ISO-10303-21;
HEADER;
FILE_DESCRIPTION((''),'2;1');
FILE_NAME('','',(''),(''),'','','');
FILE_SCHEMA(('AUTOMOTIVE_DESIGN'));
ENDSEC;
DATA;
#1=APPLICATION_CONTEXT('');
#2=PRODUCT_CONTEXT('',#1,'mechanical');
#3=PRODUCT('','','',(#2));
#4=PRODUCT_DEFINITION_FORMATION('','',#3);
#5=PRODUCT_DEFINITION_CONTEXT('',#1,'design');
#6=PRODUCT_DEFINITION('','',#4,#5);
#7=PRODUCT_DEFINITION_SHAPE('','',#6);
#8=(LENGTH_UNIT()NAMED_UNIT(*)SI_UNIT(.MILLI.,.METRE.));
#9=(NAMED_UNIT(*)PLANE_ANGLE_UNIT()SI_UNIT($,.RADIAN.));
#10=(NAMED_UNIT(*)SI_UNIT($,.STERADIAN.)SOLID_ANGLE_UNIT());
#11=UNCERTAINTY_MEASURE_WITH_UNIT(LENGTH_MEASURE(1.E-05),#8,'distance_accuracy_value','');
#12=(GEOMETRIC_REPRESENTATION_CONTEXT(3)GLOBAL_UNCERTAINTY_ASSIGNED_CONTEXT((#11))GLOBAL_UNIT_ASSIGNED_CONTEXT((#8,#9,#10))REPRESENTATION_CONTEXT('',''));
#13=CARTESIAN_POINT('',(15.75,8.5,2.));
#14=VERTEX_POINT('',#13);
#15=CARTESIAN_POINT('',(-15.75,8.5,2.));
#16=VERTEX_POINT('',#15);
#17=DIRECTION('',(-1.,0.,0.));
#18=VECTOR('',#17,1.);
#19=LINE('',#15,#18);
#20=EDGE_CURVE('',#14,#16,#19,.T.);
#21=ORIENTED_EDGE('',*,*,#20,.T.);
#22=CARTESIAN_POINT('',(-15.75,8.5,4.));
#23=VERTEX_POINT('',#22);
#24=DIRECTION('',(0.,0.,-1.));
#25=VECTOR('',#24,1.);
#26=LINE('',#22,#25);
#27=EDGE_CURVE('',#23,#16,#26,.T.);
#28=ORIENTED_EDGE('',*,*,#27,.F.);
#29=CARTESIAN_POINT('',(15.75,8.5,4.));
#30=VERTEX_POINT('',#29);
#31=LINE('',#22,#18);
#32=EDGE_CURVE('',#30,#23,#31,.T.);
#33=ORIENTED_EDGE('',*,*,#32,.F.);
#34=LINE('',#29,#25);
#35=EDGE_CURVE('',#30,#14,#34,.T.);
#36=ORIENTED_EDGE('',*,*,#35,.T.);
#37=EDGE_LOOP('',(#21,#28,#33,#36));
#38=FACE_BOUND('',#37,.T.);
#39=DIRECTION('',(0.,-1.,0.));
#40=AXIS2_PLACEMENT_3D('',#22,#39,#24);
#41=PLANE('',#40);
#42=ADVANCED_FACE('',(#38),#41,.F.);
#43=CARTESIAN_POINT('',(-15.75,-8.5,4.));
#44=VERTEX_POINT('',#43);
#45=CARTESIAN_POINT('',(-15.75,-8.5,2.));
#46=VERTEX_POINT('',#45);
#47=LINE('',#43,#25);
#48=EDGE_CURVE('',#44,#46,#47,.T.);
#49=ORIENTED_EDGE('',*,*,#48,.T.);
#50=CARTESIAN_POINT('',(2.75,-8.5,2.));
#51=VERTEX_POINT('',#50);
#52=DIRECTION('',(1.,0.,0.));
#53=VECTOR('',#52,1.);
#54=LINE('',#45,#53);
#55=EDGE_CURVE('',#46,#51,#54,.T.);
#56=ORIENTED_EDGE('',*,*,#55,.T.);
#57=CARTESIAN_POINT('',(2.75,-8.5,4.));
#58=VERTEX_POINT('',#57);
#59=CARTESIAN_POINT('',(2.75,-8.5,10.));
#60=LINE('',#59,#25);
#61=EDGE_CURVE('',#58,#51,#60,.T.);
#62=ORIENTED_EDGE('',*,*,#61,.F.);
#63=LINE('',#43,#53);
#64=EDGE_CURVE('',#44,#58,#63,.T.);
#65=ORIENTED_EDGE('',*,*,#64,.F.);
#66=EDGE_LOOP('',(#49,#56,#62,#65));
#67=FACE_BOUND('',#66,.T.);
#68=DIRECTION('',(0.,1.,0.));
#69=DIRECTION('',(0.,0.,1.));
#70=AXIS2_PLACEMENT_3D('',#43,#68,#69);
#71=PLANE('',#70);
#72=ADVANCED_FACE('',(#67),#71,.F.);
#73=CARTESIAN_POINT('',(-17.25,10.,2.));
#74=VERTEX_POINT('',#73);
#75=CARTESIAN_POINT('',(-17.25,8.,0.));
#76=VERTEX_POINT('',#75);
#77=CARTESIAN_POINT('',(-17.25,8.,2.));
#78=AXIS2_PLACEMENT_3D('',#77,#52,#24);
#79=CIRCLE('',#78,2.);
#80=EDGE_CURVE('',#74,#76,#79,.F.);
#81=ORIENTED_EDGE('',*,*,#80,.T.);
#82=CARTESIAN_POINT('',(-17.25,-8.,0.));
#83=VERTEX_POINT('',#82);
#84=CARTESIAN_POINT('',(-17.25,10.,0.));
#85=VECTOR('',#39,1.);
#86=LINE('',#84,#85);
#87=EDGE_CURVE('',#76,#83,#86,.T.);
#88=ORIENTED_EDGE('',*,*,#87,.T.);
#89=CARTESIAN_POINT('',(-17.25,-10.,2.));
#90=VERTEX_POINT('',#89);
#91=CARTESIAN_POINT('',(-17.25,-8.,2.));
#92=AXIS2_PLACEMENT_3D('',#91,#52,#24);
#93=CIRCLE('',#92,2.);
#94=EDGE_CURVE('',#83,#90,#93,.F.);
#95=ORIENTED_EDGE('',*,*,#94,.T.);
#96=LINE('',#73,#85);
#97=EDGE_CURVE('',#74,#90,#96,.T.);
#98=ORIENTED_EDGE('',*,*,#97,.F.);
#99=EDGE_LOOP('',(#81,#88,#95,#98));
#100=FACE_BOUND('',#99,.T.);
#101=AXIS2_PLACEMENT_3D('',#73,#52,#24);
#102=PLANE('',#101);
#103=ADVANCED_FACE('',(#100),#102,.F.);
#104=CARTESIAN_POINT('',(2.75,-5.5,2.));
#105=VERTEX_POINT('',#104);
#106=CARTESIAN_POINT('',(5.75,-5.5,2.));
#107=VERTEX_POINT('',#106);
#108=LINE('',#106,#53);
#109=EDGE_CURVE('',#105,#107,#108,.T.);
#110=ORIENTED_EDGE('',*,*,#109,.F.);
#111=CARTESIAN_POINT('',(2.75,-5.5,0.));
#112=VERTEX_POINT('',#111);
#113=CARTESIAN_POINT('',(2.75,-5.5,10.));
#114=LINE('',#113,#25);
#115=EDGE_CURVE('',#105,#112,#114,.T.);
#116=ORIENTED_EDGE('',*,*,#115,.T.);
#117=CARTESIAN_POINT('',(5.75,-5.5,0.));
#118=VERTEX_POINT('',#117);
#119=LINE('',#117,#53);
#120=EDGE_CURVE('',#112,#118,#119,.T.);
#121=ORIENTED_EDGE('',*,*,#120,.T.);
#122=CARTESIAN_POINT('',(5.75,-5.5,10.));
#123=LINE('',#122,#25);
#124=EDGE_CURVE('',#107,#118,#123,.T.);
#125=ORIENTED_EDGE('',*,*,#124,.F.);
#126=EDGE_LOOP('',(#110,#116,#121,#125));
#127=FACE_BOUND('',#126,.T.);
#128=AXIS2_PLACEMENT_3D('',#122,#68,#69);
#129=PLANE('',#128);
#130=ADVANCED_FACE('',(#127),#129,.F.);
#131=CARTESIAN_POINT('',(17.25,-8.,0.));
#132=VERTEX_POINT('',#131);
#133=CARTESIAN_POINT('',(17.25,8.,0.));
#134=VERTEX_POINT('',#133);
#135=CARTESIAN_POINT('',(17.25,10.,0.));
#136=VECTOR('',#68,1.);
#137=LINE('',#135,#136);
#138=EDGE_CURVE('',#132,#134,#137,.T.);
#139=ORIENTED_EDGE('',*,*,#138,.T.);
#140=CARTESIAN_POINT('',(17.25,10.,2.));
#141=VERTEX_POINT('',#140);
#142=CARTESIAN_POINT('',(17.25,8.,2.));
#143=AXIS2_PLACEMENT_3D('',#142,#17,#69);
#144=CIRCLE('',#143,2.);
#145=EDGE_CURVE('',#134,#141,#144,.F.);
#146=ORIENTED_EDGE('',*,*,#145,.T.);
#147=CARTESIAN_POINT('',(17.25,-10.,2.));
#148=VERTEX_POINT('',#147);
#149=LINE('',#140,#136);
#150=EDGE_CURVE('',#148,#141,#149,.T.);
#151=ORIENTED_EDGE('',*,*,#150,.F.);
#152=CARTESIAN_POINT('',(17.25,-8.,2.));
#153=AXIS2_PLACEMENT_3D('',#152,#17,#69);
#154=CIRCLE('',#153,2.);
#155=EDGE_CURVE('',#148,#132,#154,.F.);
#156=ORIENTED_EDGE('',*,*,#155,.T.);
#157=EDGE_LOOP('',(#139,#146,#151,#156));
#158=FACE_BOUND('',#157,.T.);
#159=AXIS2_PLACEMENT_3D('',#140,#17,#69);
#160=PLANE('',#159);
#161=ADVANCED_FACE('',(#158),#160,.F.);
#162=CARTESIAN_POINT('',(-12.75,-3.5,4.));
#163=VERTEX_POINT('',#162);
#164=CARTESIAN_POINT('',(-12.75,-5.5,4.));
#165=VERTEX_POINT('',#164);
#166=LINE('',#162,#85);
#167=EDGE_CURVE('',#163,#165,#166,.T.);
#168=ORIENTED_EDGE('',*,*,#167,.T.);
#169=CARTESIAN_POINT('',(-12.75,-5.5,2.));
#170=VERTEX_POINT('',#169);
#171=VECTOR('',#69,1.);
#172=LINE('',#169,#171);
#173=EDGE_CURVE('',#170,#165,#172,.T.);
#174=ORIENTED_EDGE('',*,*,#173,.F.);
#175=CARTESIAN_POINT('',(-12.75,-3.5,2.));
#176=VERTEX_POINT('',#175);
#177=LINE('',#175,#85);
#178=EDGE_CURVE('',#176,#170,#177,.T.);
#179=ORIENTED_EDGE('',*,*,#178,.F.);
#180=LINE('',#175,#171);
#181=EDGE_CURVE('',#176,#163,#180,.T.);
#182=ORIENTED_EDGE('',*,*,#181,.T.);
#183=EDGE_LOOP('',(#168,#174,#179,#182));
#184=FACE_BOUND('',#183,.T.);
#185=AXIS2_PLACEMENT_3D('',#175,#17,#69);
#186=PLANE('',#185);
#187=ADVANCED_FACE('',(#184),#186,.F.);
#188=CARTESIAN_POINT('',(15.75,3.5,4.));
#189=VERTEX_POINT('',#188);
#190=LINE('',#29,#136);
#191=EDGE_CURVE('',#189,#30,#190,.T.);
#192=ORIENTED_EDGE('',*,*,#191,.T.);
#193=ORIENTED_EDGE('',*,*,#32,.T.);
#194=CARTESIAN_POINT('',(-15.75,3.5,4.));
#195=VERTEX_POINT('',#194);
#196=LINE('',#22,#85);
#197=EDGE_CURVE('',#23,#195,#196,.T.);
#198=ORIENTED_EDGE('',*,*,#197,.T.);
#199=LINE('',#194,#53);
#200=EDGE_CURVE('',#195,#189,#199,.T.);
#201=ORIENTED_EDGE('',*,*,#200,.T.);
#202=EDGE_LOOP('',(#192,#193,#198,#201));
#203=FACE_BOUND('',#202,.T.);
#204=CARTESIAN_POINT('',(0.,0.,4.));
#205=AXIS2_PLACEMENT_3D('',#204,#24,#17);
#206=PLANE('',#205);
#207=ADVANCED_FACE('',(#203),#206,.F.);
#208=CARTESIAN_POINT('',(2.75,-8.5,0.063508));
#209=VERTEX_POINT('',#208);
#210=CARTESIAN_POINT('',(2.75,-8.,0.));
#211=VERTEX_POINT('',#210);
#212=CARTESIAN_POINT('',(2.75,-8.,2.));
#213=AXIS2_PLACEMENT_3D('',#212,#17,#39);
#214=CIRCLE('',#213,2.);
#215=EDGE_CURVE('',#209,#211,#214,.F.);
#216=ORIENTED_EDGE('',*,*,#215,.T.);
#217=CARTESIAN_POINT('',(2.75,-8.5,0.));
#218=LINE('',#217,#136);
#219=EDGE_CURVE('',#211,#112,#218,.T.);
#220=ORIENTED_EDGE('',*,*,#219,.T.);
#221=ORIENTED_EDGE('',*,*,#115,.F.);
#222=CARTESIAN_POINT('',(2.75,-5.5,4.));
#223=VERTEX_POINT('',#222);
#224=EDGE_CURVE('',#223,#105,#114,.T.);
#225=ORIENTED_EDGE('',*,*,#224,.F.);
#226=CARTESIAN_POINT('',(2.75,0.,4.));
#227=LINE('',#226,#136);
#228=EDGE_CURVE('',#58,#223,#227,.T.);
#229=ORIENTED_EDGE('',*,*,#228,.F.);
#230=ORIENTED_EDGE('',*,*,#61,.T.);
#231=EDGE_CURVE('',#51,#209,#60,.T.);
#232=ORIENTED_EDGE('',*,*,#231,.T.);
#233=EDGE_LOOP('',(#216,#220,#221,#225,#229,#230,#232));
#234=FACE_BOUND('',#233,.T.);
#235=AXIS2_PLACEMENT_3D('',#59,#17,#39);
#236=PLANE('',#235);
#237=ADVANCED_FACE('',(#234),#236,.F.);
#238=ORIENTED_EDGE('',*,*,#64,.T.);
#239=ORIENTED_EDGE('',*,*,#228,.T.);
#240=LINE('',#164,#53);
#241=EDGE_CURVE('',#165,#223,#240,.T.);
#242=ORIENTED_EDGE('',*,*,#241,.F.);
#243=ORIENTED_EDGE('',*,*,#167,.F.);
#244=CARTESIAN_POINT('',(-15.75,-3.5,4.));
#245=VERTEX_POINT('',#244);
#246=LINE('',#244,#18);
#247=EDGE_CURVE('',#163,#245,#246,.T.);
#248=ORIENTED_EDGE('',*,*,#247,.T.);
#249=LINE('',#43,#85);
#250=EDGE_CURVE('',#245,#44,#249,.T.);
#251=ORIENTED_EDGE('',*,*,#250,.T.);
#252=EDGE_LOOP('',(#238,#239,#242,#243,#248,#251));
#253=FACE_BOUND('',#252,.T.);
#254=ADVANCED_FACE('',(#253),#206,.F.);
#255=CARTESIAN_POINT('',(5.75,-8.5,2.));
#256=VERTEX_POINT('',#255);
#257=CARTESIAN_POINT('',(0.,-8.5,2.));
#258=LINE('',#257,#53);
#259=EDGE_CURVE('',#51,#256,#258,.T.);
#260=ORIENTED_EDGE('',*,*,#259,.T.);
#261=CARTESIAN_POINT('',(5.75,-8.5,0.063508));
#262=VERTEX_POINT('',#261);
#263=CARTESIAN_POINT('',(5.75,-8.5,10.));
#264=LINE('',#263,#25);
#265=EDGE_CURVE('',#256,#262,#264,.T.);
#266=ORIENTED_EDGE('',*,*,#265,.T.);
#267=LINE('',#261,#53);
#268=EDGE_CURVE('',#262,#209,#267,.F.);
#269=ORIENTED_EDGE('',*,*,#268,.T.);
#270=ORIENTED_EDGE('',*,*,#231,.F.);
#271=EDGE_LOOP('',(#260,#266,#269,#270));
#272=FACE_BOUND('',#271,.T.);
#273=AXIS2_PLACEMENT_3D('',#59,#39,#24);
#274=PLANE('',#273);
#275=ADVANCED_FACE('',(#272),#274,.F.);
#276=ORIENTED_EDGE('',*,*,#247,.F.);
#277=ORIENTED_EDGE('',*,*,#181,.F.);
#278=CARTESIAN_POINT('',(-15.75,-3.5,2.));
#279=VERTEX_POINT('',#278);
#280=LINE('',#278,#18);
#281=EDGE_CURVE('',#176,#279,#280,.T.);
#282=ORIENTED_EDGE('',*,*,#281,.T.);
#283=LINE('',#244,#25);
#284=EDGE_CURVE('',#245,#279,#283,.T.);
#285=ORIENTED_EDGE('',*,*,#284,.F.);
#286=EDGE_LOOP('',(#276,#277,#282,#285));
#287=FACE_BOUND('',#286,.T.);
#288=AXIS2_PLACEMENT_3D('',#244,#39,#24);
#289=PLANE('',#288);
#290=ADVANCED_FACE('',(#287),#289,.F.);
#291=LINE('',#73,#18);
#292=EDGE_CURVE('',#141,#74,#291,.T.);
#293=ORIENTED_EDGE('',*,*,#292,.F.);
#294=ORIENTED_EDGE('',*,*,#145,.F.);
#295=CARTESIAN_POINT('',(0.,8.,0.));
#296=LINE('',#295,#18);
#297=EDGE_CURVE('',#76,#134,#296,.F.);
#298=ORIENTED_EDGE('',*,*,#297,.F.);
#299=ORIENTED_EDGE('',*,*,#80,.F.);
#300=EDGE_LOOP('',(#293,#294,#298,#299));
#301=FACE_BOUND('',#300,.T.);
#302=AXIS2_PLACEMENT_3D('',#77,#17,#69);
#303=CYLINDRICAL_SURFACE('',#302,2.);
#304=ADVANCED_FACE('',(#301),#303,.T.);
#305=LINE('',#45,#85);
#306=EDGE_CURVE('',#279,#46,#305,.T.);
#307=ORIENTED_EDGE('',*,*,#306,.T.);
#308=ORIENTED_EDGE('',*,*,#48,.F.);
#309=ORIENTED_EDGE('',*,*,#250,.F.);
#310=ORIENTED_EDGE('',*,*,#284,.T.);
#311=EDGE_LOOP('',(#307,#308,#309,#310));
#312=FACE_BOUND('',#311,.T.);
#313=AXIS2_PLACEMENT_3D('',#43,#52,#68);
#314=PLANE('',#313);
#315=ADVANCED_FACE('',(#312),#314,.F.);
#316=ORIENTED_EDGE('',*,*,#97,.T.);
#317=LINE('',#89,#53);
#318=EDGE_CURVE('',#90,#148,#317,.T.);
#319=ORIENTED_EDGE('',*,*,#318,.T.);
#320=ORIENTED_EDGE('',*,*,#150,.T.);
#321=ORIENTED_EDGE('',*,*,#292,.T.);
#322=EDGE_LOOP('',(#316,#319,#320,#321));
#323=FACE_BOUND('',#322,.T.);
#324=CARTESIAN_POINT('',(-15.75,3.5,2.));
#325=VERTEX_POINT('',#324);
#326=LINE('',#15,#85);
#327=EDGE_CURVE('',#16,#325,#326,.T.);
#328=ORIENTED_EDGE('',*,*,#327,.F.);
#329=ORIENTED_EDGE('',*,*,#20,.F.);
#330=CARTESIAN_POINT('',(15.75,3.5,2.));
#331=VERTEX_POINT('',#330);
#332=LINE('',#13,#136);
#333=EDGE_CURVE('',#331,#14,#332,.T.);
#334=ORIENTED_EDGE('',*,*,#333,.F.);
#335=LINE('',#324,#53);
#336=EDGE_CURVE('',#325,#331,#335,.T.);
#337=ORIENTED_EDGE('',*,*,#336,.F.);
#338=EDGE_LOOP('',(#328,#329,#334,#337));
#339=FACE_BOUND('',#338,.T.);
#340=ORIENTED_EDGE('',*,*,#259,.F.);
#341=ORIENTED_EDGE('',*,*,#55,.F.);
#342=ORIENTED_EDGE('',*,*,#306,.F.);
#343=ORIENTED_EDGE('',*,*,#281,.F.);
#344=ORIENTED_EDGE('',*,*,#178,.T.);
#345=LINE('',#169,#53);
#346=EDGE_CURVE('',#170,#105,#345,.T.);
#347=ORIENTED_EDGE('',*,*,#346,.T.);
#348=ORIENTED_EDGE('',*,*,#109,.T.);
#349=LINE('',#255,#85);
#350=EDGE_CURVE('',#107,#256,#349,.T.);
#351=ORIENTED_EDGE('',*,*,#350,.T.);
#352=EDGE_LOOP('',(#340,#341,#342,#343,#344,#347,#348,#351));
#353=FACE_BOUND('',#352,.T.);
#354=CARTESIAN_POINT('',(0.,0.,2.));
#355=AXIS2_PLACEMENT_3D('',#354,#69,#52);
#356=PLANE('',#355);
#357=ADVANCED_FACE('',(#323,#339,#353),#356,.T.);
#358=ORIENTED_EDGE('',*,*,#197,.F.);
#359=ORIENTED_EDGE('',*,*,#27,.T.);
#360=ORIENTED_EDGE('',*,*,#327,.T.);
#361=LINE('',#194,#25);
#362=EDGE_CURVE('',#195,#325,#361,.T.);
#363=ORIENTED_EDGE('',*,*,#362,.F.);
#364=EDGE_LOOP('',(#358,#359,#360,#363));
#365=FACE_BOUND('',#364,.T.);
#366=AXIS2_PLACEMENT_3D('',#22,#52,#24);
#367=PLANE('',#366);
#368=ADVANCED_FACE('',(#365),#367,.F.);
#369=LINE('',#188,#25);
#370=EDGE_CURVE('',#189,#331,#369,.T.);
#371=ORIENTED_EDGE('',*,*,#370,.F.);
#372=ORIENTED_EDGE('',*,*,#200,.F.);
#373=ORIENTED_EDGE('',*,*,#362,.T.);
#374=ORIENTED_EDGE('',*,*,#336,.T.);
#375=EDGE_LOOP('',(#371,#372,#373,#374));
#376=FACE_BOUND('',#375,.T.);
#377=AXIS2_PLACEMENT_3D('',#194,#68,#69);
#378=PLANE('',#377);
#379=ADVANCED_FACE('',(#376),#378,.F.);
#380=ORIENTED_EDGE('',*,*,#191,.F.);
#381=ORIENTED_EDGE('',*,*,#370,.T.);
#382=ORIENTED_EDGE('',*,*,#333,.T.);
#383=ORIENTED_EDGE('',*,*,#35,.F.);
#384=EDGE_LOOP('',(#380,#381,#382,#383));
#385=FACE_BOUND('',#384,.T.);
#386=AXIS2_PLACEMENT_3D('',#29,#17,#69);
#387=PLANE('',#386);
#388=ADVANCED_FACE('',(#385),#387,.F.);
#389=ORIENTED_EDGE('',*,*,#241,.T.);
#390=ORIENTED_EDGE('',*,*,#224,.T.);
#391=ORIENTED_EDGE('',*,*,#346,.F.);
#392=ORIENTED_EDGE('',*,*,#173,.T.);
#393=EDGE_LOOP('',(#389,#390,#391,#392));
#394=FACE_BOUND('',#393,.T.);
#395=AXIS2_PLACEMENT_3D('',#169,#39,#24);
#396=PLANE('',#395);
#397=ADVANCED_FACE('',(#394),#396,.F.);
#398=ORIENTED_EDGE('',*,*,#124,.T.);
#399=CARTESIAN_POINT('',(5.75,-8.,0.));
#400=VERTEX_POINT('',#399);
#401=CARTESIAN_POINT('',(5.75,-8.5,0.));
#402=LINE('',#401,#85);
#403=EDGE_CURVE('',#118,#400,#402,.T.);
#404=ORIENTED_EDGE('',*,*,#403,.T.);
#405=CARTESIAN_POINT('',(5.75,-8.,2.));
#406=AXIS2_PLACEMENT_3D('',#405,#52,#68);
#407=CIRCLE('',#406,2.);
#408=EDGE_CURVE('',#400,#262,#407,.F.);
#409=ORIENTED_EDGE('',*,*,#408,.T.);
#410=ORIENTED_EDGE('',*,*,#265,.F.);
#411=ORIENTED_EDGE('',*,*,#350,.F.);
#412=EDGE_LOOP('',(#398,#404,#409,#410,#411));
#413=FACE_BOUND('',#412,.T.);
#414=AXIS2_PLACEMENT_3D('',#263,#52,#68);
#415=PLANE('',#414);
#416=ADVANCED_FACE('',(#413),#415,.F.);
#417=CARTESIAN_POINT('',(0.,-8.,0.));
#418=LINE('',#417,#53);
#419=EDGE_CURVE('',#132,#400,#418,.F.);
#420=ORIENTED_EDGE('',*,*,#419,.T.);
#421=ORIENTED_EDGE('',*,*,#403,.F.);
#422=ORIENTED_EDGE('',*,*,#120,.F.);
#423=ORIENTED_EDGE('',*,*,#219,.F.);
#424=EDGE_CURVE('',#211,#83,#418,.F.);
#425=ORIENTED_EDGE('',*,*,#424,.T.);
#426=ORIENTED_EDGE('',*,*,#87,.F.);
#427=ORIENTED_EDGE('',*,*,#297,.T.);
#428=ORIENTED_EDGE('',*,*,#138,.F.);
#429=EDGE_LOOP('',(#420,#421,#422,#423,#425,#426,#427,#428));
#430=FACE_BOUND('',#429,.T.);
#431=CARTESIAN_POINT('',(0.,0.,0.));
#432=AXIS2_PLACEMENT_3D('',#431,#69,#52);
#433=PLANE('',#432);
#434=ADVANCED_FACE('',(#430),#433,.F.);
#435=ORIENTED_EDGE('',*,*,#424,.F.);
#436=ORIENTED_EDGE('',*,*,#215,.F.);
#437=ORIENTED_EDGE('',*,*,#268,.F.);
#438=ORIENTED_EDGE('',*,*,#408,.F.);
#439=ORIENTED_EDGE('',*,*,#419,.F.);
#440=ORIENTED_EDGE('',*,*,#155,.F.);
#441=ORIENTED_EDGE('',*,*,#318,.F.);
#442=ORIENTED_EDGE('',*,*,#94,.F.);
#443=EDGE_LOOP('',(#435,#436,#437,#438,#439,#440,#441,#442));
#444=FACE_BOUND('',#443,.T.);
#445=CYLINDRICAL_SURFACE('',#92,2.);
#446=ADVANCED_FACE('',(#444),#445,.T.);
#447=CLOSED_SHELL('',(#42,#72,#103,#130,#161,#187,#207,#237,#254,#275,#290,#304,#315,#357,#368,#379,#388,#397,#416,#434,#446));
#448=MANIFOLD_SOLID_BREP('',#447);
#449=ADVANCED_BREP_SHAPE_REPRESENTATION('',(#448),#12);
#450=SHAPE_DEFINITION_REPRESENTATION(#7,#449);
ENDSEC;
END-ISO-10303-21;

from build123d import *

# Parameters (mm, degrees)
SKETCH1_W           = 34.5
SKETCH1_H           = 20
BOSS_EXTRUDE1_DEPTH = 2
SKETCH2_W           = 31.5
SKETCH2_H           = 5
BOSS_EXTRUDE2_DEPTH = 2
SKETCH3_W           = 3
SKETCH3_H           = 3
CUT_EXTRUDE1_DEPTH  = 10
FILLET1_R           = 2
CUT_EXTRUDE2_DEPTH  = 2


with BuildPart() as part:
    # Sketch1 → Boss-Extrude1 (new body)
    with BuildSketch(Plane.XY):
        Rectangle(SKETCH1_W, SKETCH1_H)
    extrude(amount=BOSS_EXTRUDE1_DEPTH)

    # Sketch2 → Boss-Extrude2 (add)
    with BuildSketch(Plane.XY.offset(2)):
        with Locations((0, 6)):
            Rectangle(SKETCH2_W, SKETCH2_H)
        with Locations((0, -6)):
            Rectangle(SKETCH2_W, SKETCH2_H)
    extrude(amount=BOSS_EXTRUDE2_DEPTH)

    # Sketch3 → Cut-Extrude1 (cut)
    with BuildSketch(Plane(origin=(0, 0, 0), x_dir=(-1, 0, 0), z_dir=(0, 0, -1))):
        with Locations((-4.25, -7)):
            Rectangle(SKETCH3_W, SKETCH3_H)
    extrude(amount=-CUT_EXTRUDE1_DEPTH, mode=Mode.SUBTRACT)

    # Fillet1
    # the kernel refuses this fillet: 2 mm, written as the material it takes off along each edge
    with BuildSketch(Plane(origin=(22.25, -10, 0), x_dir=(0, 1, 0), z_dir=(-1, 0, 0))) as fillet1_piece_1:
        with BuildLine():
            CenterArc((FILLET1_R, -FILLET1_R), FILLET1_R, 90, 90)
            Line((0, -FILLET1_R), (0, 0))
            Line((0, 0), (FILLET1_R, 0))
        make_face()
    extrude(amount=44.5, mode=Mode.SUBTRACT)
    with BuildSketch(Plane(origin=(-22.25, 10, 0), x_dir=(0, 0, 1), z_dir=(1, 0, 0))) as fillet1_piece_2:
        with BuildLine():
            CenterArc((FILLET1_R, FILLET1_R), FILLET1_R, 180, 90)
            Line((0, FILLET1_R), (0, 0))
            Line((0, 0), (FILLET1_R, 0))
        make_face()
    extrude(amount=44.5, mode=Mode.SUBTRACT)

    # Sketch4 → Cut-Extrude2 (cut)
    with BuildSketch(Plane.XY.offset(4)):
        Polygon((15.75, -8.5), (5.75, -8.5), (5.75, -5.5), (-12.75, -5.5), (-12.75, -3.5), (5.75, -3.5), (15.75, -3.5), align=None)
    extrude(amount=-CUT_EXTRUDE2_DEPTH, mode=Mode.SUBTRACT)


solid = part.part
